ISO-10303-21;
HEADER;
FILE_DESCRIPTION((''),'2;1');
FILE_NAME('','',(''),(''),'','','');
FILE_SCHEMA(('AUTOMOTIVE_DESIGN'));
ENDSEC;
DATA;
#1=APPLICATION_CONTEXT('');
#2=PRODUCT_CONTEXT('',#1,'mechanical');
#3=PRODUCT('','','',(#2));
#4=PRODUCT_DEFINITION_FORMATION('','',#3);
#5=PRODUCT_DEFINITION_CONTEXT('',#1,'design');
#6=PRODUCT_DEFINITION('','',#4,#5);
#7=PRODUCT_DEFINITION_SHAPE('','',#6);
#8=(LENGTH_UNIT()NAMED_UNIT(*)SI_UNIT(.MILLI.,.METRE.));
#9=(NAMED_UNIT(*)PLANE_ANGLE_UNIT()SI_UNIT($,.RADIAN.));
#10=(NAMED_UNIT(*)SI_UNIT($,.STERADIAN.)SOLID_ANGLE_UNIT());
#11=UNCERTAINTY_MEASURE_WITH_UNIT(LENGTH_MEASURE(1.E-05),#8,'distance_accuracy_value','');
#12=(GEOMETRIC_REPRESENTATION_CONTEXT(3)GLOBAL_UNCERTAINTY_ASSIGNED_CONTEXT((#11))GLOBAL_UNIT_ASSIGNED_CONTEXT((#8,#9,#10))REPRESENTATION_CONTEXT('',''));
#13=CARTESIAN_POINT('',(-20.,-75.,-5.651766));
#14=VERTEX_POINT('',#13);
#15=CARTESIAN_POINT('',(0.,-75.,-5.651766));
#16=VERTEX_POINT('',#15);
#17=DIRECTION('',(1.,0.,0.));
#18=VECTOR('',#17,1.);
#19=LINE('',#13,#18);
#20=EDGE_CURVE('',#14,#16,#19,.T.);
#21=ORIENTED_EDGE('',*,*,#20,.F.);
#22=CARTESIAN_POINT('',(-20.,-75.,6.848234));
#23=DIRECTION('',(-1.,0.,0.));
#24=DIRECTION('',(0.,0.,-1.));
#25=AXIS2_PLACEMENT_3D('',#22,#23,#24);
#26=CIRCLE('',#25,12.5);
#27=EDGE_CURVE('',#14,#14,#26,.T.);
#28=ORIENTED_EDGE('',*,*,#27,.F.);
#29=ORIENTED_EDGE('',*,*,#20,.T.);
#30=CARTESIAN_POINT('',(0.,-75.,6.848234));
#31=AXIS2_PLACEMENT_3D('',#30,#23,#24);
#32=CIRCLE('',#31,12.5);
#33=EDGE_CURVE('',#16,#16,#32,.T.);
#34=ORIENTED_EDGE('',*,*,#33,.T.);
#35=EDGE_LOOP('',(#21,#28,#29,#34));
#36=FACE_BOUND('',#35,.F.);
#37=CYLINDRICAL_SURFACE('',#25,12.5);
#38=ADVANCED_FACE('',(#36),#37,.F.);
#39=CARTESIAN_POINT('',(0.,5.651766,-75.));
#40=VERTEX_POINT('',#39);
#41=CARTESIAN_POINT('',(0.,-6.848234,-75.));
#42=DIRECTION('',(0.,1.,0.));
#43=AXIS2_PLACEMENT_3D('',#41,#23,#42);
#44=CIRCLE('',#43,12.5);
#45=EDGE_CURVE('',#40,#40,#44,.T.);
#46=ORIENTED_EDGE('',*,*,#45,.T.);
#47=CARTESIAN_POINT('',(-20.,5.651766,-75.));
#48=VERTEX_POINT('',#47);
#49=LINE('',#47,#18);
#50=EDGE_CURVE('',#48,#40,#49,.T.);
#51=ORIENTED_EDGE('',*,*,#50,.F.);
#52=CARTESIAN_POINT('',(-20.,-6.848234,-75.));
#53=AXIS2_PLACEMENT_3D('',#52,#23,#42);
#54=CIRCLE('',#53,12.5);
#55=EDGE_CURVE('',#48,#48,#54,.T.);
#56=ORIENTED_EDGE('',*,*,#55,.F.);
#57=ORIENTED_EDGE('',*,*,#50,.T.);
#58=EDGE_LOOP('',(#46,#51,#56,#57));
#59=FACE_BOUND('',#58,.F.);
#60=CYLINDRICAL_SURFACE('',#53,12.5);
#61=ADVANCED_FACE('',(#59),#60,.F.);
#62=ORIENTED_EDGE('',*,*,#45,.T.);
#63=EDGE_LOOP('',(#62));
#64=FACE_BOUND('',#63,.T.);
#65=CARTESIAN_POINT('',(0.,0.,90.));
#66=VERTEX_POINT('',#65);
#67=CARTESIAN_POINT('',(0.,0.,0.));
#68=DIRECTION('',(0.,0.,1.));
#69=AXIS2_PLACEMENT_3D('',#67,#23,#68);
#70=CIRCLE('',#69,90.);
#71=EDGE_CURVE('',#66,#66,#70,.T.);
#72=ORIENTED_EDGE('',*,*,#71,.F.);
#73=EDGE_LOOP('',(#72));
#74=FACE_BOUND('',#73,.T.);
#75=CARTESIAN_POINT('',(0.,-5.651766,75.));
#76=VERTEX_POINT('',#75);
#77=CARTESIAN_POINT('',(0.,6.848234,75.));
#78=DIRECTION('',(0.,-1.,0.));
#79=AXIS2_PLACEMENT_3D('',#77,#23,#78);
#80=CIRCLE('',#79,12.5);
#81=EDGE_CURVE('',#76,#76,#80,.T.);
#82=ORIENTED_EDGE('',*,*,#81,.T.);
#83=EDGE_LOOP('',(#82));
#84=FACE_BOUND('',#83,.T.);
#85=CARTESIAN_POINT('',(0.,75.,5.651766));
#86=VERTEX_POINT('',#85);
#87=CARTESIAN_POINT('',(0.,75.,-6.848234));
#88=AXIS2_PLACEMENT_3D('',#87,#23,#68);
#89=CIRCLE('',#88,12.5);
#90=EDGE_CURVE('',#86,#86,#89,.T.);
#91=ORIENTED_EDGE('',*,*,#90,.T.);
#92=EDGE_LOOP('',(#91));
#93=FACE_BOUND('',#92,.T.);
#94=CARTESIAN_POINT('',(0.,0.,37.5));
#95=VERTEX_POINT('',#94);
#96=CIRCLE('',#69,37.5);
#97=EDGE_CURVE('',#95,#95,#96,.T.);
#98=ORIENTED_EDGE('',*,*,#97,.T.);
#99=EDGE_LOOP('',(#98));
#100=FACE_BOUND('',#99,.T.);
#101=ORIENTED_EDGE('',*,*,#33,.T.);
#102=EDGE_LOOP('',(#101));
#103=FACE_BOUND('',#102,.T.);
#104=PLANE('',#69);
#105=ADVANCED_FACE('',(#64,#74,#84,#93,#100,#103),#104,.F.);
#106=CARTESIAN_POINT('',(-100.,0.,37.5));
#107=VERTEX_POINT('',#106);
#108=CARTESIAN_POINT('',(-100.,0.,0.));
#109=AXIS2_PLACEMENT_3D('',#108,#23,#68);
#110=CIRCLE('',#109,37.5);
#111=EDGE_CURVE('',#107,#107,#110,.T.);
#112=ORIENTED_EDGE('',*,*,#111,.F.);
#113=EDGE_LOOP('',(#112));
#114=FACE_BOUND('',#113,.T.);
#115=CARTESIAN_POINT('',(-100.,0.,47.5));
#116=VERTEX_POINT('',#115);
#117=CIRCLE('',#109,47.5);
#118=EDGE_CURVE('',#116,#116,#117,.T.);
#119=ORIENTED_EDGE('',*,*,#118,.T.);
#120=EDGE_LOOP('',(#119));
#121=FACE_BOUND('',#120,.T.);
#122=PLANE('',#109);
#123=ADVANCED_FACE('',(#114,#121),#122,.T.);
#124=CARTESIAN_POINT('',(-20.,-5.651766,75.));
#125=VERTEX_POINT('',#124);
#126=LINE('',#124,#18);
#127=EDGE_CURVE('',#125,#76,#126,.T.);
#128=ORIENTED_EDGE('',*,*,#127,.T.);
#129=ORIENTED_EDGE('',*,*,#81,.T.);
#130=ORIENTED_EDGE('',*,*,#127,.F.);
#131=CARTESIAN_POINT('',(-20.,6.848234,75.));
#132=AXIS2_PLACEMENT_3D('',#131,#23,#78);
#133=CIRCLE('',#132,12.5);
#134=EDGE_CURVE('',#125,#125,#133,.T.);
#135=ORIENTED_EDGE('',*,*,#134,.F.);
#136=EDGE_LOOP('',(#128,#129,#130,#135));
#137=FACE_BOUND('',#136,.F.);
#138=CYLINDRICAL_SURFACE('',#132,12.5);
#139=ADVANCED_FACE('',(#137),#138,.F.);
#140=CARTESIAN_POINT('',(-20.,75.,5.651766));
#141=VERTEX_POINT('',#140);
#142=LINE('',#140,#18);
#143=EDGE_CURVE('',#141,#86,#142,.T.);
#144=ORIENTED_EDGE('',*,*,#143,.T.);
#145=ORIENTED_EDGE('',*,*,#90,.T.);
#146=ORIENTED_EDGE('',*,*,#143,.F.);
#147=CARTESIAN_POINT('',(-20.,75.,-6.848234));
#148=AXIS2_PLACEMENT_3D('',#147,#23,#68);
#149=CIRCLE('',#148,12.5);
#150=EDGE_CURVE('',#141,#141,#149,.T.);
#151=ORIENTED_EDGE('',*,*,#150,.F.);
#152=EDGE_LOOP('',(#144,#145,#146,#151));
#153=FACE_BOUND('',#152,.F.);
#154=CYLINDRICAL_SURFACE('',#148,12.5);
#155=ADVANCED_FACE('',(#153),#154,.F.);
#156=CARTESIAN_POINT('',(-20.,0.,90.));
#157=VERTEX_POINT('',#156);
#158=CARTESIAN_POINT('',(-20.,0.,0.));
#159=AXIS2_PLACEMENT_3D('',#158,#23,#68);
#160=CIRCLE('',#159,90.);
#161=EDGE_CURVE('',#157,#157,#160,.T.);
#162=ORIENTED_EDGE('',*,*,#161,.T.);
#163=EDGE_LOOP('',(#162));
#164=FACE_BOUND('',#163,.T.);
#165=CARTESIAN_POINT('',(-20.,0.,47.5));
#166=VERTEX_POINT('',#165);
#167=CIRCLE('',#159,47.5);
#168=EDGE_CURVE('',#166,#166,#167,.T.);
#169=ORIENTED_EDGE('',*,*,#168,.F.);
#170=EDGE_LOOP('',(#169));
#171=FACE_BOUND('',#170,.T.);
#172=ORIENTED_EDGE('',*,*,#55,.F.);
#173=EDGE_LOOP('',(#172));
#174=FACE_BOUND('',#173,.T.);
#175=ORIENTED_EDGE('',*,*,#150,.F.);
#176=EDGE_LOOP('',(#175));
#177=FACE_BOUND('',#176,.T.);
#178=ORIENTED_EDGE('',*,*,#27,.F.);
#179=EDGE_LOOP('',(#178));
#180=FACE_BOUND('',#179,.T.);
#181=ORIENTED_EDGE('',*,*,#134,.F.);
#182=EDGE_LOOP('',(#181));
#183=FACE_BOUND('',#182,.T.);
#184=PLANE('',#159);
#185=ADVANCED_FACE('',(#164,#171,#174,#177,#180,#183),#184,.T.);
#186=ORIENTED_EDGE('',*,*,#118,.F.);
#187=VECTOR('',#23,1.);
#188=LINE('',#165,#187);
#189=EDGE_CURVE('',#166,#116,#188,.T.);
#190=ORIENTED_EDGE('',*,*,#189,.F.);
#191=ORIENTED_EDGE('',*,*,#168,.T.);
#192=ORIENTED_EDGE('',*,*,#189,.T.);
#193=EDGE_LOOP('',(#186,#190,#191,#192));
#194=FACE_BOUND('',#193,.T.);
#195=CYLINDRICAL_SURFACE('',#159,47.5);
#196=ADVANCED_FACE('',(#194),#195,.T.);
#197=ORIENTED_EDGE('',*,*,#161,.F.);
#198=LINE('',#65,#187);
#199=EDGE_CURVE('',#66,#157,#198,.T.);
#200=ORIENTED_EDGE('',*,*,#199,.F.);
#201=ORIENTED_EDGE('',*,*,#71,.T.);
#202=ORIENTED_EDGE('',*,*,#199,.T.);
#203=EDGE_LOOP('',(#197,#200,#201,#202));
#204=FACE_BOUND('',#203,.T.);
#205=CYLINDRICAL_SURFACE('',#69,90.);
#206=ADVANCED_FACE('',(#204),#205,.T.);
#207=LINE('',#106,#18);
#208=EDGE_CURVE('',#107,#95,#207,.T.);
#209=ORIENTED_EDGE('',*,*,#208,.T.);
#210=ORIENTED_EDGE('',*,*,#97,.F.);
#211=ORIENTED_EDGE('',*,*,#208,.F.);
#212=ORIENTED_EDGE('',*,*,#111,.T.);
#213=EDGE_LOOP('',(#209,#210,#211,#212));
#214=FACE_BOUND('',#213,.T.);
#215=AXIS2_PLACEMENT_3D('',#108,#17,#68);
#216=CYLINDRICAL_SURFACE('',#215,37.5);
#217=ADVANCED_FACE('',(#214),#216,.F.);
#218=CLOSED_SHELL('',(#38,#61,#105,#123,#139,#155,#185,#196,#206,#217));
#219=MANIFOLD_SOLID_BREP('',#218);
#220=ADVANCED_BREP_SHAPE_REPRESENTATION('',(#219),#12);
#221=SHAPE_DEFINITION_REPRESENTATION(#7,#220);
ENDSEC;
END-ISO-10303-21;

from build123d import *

# Parameters (mm, degrees)
F2_R            = 12.5
F3_DEPTH        = 20.001
F3_COPIES_COUNT = 4


# Not quite as in the source:
# - a pattern or mirror of a feature is missing from the dataset's text; its kind, count and spacing are read off the source's solid


with BuildPart() as f1:
    # F0 (on Front) → F1 (revolve)
    with BuildSketch(Plane.XZ):
        Polygon((-100, 37.5), (0, 37.5), (0, 90), (-20, 90), (-20, 47.5), (-100, 47.5), align=None)
    revolve(axis=Axis((-167.8846976696, 0, 0), (-1, 0, 0)))

    # F2 (on face) → F3 (cut, through all)
    with BuildSketch(Plane(origin=(-20, 0, 0), x_dir=(0, -1, 0), z_dir=(-1, 0, 0))):
        with Locations((-6.848233752, 75)):
            Circle(F2_R)
    f3 = extrude(amount=-F3_DEPTH, mode=Mode.SUBTRACT)

    # F3_copies: F3 ×4 about axis
    f3_copies_axis = Axis((0, 0, 0), (1, 0, 0))
    for i in range(1, F3_COPIES_COUNT):
        add(f3.rotate(f3_copies_axis, i * 360 / F3_COPIES_COUNT), mode=Mode.SUBTRACT)


solid = f1.part
